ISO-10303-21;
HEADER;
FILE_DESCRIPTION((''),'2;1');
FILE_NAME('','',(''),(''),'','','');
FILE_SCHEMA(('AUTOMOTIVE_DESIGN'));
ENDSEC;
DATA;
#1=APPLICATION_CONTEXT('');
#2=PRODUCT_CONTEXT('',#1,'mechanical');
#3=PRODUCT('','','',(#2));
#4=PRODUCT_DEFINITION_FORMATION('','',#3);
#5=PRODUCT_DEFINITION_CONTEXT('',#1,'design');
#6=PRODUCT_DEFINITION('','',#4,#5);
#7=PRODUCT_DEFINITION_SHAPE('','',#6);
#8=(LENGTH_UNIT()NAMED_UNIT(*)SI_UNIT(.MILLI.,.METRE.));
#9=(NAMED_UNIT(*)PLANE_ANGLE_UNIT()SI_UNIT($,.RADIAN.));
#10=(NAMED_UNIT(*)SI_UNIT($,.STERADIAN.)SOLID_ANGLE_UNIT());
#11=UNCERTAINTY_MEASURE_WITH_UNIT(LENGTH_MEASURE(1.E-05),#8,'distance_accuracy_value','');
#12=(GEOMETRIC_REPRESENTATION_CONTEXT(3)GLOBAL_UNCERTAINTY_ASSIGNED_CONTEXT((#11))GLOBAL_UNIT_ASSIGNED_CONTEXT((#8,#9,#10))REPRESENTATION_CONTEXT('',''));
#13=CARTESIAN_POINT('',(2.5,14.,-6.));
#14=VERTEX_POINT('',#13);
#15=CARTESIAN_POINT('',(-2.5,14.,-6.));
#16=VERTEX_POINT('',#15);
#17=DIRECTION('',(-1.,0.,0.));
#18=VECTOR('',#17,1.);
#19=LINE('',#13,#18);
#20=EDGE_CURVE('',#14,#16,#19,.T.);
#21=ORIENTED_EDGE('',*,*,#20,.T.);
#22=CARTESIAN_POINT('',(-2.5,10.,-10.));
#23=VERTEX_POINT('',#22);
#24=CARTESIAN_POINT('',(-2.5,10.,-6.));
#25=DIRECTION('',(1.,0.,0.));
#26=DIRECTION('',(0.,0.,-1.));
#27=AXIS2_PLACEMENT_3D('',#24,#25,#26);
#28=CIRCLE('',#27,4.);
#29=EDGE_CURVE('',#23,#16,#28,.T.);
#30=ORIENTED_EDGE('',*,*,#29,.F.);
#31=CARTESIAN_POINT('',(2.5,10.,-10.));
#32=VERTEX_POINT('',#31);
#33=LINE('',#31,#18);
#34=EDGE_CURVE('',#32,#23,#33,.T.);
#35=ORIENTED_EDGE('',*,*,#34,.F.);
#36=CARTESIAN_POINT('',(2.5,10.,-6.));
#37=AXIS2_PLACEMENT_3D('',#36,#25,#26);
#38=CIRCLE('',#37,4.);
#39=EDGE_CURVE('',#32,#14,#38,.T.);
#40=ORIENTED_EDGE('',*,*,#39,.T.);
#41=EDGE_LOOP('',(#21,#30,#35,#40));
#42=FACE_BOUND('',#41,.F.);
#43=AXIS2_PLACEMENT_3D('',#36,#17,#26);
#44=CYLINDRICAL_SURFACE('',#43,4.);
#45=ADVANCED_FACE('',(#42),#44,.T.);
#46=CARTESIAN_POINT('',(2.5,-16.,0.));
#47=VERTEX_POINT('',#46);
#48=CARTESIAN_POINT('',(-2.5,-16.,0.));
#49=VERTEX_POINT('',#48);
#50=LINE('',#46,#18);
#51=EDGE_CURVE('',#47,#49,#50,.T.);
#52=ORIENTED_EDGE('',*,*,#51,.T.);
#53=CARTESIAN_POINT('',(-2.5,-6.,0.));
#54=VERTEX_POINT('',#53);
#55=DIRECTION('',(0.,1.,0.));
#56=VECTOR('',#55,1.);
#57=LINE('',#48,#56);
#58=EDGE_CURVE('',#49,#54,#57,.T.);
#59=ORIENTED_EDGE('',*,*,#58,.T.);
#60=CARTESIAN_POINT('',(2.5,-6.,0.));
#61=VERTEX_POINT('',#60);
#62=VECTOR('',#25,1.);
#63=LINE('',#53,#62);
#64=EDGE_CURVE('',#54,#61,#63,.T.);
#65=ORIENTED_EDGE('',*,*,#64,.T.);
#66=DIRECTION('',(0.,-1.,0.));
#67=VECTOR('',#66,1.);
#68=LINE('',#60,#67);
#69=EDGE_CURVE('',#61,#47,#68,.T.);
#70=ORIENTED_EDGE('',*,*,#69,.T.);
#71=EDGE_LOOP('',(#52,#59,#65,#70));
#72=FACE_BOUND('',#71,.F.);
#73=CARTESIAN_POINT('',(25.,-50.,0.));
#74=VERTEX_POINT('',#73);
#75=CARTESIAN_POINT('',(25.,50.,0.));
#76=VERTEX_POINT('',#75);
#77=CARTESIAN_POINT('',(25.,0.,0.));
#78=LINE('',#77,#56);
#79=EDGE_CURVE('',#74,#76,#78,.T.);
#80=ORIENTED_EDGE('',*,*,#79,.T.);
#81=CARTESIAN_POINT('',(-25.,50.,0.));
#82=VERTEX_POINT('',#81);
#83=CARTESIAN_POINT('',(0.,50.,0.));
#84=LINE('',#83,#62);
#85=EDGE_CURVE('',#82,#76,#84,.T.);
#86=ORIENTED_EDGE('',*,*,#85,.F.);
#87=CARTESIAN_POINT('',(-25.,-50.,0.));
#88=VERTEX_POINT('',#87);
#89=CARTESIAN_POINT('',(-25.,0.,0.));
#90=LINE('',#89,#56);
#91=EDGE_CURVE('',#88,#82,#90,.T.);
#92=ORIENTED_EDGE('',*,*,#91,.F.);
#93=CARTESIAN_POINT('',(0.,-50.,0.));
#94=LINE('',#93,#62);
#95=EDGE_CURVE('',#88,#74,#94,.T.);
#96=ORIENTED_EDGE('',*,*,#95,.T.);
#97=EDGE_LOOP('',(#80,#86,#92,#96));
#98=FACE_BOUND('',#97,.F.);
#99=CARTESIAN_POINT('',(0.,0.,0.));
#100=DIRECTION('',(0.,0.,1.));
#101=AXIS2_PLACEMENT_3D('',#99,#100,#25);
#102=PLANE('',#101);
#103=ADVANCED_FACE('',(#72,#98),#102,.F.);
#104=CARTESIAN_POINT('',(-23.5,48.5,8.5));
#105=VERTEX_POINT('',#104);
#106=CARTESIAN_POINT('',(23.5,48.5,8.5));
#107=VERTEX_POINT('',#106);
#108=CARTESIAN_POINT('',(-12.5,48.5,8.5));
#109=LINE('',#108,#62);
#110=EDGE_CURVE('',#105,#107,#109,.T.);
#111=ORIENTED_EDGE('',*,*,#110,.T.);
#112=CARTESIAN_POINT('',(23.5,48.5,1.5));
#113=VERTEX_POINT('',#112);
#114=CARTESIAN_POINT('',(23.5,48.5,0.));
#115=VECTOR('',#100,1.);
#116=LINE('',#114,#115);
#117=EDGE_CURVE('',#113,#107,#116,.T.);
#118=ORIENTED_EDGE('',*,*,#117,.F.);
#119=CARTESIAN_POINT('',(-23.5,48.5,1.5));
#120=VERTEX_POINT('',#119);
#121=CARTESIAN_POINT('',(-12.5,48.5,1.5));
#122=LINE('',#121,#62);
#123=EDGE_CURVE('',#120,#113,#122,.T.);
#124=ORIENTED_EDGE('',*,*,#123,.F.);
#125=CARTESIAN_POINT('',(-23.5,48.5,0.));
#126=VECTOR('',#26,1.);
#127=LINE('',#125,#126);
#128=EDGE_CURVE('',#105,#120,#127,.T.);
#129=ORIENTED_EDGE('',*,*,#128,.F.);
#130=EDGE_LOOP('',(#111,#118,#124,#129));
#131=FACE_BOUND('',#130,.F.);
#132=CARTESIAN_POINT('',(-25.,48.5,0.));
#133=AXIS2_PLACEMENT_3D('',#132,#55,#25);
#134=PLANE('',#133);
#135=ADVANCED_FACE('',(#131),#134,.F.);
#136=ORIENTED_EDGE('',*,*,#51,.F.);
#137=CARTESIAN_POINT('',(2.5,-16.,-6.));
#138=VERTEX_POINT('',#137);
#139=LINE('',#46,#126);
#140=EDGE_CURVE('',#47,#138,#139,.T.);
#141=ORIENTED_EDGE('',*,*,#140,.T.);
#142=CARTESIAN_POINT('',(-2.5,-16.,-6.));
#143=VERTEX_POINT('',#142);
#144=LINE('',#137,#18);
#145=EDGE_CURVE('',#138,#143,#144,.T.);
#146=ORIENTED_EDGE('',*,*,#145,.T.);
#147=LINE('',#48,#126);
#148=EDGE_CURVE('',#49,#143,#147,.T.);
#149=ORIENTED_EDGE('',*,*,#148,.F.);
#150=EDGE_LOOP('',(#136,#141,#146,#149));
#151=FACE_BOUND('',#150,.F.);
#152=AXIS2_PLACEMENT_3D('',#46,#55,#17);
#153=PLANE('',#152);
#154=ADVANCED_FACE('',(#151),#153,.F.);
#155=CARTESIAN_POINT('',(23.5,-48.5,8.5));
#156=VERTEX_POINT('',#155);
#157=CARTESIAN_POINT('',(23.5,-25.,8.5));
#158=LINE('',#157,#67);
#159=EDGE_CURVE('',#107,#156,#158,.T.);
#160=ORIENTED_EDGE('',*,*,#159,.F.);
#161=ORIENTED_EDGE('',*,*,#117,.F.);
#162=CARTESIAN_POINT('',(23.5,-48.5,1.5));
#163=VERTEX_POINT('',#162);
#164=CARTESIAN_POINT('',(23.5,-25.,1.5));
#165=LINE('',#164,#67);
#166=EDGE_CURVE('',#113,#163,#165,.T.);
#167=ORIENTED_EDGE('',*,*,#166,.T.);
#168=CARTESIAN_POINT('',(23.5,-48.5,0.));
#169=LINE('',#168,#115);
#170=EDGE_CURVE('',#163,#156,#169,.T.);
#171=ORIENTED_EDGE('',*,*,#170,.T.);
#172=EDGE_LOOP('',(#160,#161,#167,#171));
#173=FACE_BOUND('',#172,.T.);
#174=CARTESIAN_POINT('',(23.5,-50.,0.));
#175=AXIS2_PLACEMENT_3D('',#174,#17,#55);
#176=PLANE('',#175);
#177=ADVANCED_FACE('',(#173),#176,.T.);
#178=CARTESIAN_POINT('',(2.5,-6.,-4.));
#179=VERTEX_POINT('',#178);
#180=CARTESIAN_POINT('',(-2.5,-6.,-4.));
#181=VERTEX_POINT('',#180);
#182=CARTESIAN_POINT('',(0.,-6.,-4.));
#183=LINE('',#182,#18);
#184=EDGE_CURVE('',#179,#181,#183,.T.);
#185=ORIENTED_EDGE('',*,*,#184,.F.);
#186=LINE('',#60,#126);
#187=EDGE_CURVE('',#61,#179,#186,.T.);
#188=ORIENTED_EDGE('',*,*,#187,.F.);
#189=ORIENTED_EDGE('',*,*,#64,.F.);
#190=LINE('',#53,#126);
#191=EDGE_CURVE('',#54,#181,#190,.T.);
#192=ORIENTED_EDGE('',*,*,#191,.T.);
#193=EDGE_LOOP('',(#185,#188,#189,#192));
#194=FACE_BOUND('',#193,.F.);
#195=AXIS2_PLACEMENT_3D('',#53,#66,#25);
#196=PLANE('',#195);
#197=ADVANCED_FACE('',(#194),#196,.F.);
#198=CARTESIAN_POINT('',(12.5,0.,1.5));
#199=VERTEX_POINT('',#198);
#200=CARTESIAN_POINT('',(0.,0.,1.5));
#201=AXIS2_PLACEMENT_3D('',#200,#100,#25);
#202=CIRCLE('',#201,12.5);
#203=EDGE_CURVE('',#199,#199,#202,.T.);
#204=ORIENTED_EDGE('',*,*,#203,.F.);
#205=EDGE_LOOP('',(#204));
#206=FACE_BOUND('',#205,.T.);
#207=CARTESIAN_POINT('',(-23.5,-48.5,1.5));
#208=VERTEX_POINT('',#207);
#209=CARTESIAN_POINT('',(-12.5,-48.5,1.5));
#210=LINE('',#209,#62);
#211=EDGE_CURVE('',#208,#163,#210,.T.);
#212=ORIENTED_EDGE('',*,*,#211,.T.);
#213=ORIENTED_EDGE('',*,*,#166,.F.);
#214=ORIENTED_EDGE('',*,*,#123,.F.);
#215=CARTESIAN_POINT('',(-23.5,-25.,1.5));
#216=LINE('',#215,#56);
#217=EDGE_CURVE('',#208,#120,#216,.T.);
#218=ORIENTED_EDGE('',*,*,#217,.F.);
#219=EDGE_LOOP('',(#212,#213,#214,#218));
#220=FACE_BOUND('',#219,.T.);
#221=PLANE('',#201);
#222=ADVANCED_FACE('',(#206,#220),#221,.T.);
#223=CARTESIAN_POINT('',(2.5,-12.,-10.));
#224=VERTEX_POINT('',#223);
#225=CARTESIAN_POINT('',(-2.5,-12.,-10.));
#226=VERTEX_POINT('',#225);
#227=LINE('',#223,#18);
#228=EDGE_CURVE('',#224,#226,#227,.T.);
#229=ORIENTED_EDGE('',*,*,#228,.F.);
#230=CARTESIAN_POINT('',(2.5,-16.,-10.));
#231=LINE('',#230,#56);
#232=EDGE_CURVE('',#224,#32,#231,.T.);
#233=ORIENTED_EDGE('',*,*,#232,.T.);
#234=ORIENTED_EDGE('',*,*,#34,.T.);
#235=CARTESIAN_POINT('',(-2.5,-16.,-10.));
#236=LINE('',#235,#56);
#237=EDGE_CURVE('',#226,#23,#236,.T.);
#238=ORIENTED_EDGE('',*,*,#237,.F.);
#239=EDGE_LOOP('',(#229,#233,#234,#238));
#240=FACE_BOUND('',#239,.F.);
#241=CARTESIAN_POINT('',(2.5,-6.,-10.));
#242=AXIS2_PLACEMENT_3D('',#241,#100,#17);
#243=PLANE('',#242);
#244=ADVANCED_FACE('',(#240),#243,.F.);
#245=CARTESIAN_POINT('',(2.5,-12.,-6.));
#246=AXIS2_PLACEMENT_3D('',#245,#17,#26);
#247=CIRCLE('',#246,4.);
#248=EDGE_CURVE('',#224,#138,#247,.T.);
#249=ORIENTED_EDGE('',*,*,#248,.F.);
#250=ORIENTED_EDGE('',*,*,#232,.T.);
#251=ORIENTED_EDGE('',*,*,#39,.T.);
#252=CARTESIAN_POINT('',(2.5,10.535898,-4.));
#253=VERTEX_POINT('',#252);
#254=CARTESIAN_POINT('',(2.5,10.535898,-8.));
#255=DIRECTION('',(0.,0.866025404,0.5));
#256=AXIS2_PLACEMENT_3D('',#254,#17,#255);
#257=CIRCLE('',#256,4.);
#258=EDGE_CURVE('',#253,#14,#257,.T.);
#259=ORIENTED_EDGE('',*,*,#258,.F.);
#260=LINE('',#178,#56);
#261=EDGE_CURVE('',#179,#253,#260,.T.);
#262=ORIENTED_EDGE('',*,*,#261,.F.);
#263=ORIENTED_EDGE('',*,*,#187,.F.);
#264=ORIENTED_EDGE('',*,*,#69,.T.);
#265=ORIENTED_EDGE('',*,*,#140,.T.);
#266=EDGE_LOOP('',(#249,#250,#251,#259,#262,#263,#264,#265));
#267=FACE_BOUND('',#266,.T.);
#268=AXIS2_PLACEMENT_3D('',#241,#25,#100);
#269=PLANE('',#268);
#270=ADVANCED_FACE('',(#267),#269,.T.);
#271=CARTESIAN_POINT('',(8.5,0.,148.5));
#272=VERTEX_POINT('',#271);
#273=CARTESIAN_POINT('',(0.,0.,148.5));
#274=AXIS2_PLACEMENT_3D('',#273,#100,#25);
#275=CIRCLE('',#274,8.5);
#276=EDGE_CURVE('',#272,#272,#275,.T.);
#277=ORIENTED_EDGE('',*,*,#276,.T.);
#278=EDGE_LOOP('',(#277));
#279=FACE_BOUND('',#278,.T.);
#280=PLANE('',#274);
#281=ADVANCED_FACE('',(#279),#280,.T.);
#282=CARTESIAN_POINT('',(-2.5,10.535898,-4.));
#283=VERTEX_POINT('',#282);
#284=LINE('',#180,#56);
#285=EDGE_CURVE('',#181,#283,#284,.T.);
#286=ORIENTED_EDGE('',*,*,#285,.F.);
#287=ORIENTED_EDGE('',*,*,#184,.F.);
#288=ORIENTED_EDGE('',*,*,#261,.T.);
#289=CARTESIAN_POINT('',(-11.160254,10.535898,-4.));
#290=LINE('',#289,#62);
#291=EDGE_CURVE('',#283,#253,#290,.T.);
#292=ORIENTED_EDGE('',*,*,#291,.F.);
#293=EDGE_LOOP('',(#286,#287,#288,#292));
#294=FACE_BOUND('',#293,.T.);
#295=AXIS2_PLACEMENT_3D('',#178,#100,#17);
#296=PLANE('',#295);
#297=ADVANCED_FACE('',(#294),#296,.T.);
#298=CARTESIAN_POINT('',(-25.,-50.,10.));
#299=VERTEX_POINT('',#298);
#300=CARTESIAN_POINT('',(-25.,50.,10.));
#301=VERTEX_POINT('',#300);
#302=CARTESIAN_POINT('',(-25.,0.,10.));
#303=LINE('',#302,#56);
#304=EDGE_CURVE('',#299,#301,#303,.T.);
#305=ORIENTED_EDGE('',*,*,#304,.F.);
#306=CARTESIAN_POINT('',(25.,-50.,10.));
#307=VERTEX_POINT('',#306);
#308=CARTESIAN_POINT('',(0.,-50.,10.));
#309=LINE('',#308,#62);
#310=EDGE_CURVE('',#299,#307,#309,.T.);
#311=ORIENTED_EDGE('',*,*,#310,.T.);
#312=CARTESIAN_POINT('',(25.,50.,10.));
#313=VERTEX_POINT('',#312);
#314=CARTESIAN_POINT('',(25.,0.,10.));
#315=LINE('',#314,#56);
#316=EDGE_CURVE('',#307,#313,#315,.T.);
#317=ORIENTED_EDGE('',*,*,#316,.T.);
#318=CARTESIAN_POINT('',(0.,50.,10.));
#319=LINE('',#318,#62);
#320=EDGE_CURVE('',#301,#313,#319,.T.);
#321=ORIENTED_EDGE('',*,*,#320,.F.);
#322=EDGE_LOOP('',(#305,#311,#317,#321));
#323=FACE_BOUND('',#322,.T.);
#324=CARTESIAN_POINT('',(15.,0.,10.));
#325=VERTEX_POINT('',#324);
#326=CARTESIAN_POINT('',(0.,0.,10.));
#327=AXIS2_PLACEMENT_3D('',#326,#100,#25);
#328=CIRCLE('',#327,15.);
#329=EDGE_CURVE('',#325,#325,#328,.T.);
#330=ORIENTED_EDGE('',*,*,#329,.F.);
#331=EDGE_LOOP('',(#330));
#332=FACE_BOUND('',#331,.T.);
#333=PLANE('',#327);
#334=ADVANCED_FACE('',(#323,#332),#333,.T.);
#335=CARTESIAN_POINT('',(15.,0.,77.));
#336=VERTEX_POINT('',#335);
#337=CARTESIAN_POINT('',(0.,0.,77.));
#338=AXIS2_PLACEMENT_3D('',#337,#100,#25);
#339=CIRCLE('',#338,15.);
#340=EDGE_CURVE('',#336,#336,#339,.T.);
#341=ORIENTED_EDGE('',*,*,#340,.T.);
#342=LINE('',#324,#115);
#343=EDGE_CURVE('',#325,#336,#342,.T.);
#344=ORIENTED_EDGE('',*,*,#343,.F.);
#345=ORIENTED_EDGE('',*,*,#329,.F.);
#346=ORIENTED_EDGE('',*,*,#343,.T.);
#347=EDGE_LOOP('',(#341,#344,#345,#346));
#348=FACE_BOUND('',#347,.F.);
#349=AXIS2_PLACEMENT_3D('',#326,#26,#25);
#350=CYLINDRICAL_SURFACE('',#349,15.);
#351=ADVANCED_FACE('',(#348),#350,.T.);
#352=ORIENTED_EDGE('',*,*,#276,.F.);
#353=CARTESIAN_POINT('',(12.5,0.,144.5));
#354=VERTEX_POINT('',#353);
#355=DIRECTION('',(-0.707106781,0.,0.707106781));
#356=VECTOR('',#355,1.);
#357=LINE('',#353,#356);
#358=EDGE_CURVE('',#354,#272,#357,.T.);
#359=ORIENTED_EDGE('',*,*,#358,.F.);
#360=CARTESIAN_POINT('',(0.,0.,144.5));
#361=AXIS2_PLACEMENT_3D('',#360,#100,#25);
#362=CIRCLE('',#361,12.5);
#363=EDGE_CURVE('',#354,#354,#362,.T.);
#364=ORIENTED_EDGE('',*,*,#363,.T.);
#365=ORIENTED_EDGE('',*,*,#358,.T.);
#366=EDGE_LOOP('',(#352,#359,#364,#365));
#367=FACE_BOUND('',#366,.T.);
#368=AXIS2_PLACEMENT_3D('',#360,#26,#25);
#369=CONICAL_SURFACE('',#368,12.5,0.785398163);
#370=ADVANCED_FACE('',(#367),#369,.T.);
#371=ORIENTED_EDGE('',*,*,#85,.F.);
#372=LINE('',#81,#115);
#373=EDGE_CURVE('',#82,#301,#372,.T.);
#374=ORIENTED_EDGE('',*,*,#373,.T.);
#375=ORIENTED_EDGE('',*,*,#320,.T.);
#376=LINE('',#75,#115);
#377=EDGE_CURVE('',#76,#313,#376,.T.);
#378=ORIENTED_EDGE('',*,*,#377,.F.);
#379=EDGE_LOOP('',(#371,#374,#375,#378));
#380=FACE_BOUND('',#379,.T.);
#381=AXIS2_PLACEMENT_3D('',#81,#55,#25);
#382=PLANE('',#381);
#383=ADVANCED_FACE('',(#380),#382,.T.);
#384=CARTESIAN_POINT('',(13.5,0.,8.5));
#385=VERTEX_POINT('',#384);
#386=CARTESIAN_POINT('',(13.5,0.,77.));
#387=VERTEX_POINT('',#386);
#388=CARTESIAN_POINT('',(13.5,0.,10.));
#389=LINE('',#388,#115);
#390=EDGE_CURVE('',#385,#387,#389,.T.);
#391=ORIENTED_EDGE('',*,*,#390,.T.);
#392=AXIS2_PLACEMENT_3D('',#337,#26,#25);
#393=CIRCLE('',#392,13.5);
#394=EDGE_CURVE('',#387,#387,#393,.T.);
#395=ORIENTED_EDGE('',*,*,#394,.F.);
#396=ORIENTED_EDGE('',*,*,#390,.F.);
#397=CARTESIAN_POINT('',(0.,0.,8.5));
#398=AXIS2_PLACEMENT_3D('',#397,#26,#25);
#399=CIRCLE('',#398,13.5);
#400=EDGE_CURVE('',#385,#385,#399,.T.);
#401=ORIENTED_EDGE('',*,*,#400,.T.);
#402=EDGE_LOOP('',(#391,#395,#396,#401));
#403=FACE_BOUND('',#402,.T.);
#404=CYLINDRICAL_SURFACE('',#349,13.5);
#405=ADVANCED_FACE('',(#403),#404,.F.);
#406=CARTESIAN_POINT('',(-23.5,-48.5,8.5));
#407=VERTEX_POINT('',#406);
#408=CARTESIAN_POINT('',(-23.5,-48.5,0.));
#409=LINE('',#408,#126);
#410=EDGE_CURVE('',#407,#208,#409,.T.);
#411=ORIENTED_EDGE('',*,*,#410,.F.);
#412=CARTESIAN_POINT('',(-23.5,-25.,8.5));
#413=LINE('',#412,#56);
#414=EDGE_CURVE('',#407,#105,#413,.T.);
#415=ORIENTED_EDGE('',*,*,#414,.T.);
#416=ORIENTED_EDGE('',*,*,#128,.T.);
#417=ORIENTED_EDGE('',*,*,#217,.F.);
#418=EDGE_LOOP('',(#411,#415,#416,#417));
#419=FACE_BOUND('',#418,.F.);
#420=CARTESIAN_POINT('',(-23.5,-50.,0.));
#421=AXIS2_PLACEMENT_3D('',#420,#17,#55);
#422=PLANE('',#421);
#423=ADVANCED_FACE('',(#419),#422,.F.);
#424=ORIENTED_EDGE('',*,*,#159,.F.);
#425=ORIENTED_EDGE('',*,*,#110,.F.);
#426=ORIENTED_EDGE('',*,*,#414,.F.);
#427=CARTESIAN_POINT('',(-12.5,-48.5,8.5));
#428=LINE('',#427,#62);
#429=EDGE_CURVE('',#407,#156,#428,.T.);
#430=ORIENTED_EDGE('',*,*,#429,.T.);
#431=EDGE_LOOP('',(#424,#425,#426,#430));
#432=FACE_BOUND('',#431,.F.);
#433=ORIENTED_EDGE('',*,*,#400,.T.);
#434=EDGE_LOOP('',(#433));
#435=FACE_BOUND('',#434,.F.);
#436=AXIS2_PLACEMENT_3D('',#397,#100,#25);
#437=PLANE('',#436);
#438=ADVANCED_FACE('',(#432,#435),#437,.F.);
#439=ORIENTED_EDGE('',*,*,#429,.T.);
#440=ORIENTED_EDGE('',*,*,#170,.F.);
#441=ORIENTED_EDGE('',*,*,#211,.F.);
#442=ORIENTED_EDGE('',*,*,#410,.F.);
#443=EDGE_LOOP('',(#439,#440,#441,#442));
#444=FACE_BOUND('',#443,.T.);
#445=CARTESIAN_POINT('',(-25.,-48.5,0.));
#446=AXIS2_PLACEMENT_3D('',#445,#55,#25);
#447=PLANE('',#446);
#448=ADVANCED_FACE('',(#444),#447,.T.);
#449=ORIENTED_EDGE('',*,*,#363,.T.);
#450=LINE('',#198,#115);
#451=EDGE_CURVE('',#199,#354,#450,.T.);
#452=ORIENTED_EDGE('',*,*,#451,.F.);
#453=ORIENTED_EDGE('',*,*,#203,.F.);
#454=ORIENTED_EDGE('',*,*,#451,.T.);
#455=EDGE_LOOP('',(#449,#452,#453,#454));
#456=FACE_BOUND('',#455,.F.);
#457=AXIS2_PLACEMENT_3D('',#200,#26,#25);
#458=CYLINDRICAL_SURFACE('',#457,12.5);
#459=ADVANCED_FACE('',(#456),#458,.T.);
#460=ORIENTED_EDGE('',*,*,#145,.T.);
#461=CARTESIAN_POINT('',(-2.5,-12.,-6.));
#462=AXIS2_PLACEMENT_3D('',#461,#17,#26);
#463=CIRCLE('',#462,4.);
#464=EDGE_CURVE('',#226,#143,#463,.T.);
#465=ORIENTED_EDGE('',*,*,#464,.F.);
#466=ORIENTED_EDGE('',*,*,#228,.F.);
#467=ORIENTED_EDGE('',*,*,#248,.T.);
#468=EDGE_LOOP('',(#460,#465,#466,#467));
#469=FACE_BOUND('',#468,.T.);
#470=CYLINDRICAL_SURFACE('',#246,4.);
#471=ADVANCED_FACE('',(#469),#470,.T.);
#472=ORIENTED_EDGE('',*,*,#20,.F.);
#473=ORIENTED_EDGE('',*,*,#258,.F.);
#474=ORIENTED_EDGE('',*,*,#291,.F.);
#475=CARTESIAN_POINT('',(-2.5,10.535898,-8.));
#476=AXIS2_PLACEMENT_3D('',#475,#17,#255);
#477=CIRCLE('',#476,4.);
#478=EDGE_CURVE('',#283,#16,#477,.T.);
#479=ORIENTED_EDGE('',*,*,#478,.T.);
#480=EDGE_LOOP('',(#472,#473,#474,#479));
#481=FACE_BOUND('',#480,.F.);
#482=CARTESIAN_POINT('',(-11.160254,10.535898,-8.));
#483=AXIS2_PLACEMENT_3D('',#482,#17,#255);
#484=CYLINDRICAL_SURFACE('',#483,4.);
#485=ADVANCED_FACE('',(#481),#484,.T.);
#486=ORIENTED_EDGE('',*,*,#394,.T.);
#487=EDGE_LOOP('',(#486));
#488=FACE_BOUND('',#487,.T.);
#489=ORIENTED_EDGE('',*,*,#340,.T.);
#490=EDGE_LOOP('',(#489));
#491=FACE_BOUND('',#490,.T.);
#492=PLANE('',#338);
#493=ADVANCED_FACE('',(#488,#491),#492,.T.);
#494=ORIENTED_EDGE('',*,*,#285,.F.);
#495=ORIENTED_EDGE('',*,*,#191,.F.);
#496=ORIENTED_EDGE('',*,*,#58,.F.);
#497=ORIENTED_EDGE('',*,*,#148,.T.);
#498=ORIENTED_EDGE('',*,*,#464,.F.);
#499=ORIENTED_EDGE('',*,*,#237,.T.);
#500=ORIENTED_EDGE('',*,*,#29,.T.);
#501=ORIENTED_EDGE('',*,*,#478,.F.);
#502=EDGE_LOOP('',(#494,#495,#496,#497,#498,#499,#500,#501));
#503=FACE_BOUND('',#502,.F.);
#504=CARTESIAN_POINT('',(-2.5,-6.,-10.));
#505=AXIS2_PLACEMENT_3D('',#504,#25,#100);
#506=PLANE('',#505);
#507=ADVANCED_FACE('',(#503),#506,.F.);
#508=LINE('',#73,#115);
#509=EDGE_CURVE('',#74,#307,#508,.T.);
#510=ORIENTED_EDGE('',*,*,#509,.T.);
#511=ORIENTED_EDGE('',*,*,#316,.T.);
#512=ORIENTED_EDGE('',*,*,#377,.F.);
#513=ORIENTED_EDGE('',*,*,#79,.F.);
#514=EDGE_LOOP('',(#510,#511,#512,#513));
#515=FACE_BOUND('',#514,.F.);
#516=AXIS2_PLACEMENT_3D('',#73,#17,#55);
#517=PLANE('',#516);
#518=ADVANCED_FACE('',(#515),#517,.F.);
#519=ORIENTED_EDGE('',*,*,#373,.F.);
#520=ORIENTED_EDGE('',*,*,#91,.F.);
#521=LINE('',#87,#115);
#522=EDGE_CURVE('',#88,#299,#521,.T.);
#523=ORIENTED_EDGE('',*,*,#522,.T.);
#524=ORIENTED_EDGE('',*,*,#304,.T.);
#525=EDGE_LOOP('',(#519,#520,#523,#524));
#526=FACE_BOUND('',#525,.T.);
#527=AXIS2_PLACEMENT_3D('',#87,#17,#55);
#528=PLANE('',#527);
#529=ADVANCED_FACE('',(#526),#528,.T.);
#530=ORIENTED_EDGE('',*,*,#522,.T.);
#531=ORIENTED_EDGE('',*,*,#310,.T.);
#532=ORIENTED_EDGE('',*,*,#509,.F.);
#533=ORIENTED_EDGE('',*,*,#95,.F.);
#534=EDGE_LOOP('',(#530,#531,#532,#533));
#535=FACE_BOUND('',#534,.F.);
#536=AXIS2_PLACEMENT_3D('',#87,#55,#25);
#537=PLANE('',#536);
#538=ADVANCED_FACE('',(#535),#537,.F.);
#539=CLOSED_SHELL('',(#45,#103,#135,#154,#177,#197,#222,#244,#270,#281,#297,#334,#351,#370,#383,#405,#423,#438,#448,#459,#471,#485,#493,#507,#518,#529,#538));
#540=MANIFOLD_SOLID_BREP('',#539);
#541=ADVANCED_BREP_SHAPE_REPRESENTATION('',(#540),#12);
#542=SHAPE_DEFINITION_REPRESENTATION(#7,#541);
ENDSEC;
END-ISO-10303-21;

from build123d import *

# Parameters (mm, degrees)
F0_W         = 50
F0_H         = 100
F1_DEPTH     = 10
F2_R         = 15
F3_DEPTH     = 67
F4_T         = -1.5
F5_R         = 12.5
F6_DEPTH     = 147
F7_SIZE      = 4
F9_DEPTH     = 10
F10_W        = 5
F10_H        = 6
F11_DEPTH    = 20
F12_R        = 4
F13_R        = 4
F14_T1_DEPTH = 22.3205080757


# Not quite as in the source:
# - a fillet or chamfer that OpenCascade refuses, or shapes differently, is made with other operations: its cross-section is extruded or revolved along the edge and cut away or added


with BuildPart() as f1:
    # F0 (on Top) → F1 (new body)
    with BuildSketch(Plane.XY):
        Rectangle(F0_W, F0_H)
    extrude(amount=F1_DEPTH)

    # F2 (on face) → F3 (join)
    with BuildSketch(Plane.XY.offset(10)):
        Circle(F2_R)
    extrude(amount=F3_DEPTH)

    # F4
    f4_openings = [f1.faces().sort_by_distance(p)[0] for p in [
        (0, 0, 77),
    ]]
    offset(amount=F4_T, openings=f4_openings, kind=Kind.INTERSECTION)

    # F5 (on face) → F6 (join)
    with BuildSketch(Plane.XY.offset(1.5)):
        Circle(F5_R)
    extrude(amount=F6_DEPTH)

    # F7
    f7_edges = [f1.edges().sort_by_distance(p)[0] for p in [
        (-12.5, 0, 148.5),
    ]]
    chamfer(f7_edges, length=F7_SIZE)

    # F8 (on face) → F9 (join)
    with BuildSketch(Plane(origin=(0, 0, 0), x_dir=(1, 0, 0), z_dir=(0, 0, -1))):
        Polygon((2.5, 16), (0, 16), (-2.5, 16), (-2.5, 6), (2.5, 6), align=None)
    extrude(amount=F9_DEPTH)

    # F10 (on face) → F11 (join)
    with BuildSketch(Plane(origin=(0, -6, 0), x_dir=(-1, 0, 0), z_dir=(0, 1, 0))):
        with Locations((0, -7)):
            Rectangle(F10_W, F10_H)
    extrude(amount=F11_DEPTH)

    # F12
    f12_edges = [f1.edges().sort_by_distance(p)[0] for p in [
        (0, 14, -10),
    ]]
    fillet(f12_edges, radius=F12_R)

    # F13
    f13_edges = [f1.edges().sort_by_distance(p)[0] for p in [
        (0, -16, -10),
    ]]
    fillet(f13_edges, radius=F13_R)

    # F14: fillet of radius 4 on 1 edges, made by hand

    # F14_s2 → F14_t1 (cut)
    with BuildSketch(Plane.YZ.offset(-11.1602540378)):
        with BuildLine():
            ThreePointArc((14, -6), (12.5358983849, -4.5358983849), (10.5358983849, -4))
            Line((10.5358983849, -4), (14, -4))
            Line((14, -4), (14, -6))
        make_face()
    extrude(amount=F14_T1_DEPTH, mode=Mode.SUBTRACT)


solid = f1.part
